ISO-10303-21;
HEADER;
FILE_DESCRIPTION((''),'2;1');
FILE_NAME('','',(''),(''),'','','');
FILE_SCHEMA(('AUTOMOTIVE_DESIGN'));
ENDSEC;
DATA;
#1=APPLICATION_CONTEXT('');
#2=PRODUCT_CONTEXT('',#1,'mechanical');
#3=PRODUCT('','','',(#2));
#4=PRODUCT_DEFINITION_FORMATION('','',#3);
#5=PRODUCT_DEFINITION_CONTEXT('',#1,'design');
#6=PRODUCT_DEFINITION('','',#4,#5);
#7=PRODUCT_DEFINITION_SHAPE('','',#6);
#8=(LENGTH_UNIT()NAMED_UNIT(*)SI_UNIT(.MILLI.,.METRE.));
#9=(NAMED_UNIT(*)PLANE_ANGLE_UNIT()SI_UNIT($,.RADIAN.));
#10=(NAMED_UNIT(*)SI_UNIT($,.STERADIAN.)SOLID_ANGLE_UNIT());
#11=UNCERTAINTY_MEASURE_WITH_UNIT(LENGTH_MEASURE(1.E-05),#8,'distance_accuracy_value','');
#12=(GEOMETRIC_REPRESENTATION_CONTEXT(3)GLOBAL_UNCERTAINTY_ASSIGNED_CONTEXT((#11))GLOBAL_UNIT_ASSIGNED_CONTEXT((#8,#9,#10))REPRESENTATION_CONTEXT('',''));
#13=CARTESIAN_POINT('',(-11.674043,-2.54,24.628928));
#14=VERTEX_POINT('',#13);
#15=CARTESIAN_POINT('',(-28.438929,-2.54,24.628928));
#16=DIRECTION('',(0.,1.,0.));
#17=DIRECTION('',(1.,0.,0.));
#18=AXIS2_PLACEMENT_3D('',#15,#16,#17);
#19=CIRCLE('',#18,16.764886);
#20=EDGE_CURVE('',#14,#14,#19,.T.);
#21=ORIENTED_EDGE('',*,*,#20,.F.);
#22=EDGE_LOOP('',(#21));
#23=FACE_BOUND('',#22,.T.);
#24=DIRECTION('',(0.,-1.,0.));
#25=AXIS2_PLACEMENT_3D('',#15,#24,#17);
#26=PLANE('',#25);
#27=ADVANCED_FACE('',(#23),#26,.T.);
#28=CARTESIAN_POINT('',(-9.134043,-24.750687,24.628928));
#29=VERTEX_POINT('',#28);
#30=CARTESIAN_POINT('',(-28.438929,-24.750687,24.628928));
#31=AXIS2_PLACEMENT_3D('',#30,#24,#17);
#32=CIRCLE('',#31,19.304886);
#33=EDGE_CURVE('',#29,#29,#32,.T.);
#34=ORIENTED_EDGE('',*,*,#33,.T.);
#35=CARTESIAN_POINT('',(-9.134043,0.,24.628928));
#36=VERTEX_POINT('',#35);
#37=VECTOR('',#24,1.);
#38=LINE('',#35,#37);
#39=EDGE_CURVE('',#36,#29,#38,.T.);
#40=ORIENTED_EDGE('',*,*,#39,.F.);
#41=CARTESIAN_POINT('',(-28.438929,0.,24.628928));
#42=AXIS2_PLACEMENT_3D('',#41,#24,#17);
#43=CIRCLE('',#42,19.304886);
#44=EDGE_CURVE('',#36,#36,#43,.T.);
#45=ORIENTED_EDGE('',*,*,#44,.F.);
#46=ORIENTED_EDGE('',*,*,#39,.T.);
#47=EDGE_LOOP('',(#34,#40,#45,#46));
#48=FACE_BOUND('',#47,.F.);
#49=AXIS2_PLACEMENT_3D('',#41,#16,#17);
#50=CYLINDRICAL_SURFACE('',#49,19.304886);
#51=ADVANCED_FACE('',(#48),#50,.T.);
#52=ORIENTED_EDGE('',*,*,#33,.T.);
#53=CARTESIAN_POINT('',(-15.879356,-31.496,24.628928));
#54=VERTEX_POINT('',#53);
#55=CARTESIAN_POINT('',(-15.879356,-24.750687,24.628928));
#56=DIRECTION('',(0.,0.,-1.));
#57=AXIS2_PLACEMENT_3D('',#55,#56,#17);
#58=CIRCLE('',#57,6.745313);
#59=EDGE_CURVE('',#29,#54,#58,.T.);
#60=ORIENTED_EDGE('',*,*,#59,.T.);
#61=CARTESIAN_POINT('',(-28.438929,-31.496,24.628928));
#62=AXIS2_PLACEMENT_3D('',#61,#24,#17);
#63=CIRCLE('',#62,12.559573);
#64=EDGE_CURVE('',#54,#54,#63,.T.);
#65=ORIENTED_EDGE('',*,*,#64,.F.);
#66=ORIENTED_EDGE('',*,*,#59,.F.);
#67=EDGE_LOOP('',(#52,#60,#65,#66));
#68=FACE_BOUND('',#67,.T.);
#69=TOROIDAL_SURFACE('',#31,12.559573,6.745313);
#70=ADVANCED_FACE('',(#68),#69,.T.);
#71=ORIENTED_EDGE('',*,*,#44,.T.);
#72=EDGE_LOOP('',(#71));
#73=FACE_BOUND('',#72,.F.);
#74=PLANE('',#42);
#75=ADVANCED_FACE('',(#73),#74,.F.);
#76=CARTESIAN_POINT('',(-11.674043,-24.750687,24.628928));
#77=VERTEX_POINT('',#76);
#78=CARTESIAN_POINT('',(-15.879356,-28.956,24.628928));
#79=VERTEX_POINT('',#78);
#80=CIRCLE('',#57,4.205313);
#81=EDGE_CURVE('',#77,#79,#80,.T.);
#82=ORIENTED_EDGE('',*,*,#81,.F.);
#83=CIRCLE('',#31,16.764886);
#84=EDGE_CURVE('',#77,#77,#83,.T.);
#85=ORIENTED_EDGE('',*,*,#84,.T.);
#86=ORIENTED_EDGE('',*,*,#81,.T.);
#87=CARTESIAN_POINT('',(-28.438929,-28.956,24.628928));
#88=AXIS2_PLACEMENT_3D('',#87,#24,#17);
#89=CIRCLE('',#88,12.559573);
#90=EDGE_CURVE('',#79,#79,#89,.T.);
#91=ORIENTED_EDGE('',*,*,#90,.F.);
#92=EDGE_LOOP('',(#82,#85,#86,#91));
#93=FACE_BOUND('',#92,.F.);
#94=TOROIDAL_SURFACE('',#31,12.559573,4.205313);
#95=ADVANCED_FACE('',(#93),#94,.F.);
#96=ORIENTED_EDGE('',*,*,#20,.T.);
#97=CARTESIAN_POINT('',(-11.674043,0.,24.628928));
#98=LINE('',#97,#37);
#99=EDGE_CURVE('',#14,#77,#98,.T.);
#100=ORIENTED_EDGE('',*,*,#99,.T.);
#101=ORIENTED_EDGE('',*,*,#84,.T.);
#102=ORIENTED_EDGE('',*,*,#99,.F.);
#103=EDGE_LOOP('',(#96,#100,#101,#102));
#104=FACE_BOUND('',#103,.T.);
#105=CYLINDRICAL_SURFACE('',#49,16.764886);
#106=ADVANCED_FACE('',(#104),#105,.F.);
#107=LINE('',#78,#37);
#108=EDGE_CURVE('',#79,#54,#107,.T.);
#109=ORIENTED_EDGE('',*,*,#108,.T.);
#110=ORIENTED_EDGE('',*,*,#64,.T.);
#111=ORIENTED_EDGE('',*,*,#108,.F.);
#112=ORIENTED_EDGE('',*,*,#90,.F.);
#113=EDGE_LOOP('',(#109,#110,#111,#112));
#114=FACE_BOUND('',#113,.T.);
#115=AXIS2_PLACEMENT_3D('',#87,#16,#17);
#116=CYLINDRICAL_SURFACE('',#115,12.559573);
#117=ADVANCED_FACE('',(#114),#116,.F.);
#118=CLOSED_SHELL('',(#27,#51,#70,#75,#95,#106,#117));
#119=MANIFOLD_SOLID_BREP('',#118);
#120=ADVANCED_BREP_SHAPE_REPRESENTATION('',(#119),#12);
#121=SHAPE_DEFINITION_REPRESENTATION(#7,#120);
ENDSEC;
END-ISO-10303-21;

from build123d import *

# Parameters (mm, degrees)
F0_R     = 19.304886182
F1_DEPTH = 31.496
F2_R     = 6.7453126933
F3_T     = -2.54


# Not quite as in the source:
# - a shell that OpenCascade refuses in one call is made with other operations: the cavity is built on its own and cut out


with BuildPart() as f1:
    # F0 (on Front) → F1 (new body)
    with BuildSketch(Plane.XZ):
        with Locations((-28.4389294684, 24.6289279312)):
            Circle(F0_R)
    extrude(amount=F1_DEPTH)

    # F2
    f2_edges = [f1.edges().sort_by_distance(p)[0] for p in [
        (-47.743816, -31.496, 24.628928),
    ]]
    fillet(f2_edges, radius=F2_R)

    # F3: a shell. OpenCascade refuses it in one call, so the cavity is built on its own and cut out:
    # the body offset inwards by the wall thickness, plus a prism from it out through each open face.
    f3_core = offset(f1.part, amount=F3_T, mode=Mode.PRIVATE)
    f3_exits = [f3_core.faces().sort_by_distance(p)[0] for p in [
        (-28.438929, -28.956, 24.628928),
    ]]
    add(f3_core, mode=Mode.SUBTRACT)
    extrude(f3_exits, amount=-F3_T, mode=Mode.SUBTRACT)


solid = f1.part
